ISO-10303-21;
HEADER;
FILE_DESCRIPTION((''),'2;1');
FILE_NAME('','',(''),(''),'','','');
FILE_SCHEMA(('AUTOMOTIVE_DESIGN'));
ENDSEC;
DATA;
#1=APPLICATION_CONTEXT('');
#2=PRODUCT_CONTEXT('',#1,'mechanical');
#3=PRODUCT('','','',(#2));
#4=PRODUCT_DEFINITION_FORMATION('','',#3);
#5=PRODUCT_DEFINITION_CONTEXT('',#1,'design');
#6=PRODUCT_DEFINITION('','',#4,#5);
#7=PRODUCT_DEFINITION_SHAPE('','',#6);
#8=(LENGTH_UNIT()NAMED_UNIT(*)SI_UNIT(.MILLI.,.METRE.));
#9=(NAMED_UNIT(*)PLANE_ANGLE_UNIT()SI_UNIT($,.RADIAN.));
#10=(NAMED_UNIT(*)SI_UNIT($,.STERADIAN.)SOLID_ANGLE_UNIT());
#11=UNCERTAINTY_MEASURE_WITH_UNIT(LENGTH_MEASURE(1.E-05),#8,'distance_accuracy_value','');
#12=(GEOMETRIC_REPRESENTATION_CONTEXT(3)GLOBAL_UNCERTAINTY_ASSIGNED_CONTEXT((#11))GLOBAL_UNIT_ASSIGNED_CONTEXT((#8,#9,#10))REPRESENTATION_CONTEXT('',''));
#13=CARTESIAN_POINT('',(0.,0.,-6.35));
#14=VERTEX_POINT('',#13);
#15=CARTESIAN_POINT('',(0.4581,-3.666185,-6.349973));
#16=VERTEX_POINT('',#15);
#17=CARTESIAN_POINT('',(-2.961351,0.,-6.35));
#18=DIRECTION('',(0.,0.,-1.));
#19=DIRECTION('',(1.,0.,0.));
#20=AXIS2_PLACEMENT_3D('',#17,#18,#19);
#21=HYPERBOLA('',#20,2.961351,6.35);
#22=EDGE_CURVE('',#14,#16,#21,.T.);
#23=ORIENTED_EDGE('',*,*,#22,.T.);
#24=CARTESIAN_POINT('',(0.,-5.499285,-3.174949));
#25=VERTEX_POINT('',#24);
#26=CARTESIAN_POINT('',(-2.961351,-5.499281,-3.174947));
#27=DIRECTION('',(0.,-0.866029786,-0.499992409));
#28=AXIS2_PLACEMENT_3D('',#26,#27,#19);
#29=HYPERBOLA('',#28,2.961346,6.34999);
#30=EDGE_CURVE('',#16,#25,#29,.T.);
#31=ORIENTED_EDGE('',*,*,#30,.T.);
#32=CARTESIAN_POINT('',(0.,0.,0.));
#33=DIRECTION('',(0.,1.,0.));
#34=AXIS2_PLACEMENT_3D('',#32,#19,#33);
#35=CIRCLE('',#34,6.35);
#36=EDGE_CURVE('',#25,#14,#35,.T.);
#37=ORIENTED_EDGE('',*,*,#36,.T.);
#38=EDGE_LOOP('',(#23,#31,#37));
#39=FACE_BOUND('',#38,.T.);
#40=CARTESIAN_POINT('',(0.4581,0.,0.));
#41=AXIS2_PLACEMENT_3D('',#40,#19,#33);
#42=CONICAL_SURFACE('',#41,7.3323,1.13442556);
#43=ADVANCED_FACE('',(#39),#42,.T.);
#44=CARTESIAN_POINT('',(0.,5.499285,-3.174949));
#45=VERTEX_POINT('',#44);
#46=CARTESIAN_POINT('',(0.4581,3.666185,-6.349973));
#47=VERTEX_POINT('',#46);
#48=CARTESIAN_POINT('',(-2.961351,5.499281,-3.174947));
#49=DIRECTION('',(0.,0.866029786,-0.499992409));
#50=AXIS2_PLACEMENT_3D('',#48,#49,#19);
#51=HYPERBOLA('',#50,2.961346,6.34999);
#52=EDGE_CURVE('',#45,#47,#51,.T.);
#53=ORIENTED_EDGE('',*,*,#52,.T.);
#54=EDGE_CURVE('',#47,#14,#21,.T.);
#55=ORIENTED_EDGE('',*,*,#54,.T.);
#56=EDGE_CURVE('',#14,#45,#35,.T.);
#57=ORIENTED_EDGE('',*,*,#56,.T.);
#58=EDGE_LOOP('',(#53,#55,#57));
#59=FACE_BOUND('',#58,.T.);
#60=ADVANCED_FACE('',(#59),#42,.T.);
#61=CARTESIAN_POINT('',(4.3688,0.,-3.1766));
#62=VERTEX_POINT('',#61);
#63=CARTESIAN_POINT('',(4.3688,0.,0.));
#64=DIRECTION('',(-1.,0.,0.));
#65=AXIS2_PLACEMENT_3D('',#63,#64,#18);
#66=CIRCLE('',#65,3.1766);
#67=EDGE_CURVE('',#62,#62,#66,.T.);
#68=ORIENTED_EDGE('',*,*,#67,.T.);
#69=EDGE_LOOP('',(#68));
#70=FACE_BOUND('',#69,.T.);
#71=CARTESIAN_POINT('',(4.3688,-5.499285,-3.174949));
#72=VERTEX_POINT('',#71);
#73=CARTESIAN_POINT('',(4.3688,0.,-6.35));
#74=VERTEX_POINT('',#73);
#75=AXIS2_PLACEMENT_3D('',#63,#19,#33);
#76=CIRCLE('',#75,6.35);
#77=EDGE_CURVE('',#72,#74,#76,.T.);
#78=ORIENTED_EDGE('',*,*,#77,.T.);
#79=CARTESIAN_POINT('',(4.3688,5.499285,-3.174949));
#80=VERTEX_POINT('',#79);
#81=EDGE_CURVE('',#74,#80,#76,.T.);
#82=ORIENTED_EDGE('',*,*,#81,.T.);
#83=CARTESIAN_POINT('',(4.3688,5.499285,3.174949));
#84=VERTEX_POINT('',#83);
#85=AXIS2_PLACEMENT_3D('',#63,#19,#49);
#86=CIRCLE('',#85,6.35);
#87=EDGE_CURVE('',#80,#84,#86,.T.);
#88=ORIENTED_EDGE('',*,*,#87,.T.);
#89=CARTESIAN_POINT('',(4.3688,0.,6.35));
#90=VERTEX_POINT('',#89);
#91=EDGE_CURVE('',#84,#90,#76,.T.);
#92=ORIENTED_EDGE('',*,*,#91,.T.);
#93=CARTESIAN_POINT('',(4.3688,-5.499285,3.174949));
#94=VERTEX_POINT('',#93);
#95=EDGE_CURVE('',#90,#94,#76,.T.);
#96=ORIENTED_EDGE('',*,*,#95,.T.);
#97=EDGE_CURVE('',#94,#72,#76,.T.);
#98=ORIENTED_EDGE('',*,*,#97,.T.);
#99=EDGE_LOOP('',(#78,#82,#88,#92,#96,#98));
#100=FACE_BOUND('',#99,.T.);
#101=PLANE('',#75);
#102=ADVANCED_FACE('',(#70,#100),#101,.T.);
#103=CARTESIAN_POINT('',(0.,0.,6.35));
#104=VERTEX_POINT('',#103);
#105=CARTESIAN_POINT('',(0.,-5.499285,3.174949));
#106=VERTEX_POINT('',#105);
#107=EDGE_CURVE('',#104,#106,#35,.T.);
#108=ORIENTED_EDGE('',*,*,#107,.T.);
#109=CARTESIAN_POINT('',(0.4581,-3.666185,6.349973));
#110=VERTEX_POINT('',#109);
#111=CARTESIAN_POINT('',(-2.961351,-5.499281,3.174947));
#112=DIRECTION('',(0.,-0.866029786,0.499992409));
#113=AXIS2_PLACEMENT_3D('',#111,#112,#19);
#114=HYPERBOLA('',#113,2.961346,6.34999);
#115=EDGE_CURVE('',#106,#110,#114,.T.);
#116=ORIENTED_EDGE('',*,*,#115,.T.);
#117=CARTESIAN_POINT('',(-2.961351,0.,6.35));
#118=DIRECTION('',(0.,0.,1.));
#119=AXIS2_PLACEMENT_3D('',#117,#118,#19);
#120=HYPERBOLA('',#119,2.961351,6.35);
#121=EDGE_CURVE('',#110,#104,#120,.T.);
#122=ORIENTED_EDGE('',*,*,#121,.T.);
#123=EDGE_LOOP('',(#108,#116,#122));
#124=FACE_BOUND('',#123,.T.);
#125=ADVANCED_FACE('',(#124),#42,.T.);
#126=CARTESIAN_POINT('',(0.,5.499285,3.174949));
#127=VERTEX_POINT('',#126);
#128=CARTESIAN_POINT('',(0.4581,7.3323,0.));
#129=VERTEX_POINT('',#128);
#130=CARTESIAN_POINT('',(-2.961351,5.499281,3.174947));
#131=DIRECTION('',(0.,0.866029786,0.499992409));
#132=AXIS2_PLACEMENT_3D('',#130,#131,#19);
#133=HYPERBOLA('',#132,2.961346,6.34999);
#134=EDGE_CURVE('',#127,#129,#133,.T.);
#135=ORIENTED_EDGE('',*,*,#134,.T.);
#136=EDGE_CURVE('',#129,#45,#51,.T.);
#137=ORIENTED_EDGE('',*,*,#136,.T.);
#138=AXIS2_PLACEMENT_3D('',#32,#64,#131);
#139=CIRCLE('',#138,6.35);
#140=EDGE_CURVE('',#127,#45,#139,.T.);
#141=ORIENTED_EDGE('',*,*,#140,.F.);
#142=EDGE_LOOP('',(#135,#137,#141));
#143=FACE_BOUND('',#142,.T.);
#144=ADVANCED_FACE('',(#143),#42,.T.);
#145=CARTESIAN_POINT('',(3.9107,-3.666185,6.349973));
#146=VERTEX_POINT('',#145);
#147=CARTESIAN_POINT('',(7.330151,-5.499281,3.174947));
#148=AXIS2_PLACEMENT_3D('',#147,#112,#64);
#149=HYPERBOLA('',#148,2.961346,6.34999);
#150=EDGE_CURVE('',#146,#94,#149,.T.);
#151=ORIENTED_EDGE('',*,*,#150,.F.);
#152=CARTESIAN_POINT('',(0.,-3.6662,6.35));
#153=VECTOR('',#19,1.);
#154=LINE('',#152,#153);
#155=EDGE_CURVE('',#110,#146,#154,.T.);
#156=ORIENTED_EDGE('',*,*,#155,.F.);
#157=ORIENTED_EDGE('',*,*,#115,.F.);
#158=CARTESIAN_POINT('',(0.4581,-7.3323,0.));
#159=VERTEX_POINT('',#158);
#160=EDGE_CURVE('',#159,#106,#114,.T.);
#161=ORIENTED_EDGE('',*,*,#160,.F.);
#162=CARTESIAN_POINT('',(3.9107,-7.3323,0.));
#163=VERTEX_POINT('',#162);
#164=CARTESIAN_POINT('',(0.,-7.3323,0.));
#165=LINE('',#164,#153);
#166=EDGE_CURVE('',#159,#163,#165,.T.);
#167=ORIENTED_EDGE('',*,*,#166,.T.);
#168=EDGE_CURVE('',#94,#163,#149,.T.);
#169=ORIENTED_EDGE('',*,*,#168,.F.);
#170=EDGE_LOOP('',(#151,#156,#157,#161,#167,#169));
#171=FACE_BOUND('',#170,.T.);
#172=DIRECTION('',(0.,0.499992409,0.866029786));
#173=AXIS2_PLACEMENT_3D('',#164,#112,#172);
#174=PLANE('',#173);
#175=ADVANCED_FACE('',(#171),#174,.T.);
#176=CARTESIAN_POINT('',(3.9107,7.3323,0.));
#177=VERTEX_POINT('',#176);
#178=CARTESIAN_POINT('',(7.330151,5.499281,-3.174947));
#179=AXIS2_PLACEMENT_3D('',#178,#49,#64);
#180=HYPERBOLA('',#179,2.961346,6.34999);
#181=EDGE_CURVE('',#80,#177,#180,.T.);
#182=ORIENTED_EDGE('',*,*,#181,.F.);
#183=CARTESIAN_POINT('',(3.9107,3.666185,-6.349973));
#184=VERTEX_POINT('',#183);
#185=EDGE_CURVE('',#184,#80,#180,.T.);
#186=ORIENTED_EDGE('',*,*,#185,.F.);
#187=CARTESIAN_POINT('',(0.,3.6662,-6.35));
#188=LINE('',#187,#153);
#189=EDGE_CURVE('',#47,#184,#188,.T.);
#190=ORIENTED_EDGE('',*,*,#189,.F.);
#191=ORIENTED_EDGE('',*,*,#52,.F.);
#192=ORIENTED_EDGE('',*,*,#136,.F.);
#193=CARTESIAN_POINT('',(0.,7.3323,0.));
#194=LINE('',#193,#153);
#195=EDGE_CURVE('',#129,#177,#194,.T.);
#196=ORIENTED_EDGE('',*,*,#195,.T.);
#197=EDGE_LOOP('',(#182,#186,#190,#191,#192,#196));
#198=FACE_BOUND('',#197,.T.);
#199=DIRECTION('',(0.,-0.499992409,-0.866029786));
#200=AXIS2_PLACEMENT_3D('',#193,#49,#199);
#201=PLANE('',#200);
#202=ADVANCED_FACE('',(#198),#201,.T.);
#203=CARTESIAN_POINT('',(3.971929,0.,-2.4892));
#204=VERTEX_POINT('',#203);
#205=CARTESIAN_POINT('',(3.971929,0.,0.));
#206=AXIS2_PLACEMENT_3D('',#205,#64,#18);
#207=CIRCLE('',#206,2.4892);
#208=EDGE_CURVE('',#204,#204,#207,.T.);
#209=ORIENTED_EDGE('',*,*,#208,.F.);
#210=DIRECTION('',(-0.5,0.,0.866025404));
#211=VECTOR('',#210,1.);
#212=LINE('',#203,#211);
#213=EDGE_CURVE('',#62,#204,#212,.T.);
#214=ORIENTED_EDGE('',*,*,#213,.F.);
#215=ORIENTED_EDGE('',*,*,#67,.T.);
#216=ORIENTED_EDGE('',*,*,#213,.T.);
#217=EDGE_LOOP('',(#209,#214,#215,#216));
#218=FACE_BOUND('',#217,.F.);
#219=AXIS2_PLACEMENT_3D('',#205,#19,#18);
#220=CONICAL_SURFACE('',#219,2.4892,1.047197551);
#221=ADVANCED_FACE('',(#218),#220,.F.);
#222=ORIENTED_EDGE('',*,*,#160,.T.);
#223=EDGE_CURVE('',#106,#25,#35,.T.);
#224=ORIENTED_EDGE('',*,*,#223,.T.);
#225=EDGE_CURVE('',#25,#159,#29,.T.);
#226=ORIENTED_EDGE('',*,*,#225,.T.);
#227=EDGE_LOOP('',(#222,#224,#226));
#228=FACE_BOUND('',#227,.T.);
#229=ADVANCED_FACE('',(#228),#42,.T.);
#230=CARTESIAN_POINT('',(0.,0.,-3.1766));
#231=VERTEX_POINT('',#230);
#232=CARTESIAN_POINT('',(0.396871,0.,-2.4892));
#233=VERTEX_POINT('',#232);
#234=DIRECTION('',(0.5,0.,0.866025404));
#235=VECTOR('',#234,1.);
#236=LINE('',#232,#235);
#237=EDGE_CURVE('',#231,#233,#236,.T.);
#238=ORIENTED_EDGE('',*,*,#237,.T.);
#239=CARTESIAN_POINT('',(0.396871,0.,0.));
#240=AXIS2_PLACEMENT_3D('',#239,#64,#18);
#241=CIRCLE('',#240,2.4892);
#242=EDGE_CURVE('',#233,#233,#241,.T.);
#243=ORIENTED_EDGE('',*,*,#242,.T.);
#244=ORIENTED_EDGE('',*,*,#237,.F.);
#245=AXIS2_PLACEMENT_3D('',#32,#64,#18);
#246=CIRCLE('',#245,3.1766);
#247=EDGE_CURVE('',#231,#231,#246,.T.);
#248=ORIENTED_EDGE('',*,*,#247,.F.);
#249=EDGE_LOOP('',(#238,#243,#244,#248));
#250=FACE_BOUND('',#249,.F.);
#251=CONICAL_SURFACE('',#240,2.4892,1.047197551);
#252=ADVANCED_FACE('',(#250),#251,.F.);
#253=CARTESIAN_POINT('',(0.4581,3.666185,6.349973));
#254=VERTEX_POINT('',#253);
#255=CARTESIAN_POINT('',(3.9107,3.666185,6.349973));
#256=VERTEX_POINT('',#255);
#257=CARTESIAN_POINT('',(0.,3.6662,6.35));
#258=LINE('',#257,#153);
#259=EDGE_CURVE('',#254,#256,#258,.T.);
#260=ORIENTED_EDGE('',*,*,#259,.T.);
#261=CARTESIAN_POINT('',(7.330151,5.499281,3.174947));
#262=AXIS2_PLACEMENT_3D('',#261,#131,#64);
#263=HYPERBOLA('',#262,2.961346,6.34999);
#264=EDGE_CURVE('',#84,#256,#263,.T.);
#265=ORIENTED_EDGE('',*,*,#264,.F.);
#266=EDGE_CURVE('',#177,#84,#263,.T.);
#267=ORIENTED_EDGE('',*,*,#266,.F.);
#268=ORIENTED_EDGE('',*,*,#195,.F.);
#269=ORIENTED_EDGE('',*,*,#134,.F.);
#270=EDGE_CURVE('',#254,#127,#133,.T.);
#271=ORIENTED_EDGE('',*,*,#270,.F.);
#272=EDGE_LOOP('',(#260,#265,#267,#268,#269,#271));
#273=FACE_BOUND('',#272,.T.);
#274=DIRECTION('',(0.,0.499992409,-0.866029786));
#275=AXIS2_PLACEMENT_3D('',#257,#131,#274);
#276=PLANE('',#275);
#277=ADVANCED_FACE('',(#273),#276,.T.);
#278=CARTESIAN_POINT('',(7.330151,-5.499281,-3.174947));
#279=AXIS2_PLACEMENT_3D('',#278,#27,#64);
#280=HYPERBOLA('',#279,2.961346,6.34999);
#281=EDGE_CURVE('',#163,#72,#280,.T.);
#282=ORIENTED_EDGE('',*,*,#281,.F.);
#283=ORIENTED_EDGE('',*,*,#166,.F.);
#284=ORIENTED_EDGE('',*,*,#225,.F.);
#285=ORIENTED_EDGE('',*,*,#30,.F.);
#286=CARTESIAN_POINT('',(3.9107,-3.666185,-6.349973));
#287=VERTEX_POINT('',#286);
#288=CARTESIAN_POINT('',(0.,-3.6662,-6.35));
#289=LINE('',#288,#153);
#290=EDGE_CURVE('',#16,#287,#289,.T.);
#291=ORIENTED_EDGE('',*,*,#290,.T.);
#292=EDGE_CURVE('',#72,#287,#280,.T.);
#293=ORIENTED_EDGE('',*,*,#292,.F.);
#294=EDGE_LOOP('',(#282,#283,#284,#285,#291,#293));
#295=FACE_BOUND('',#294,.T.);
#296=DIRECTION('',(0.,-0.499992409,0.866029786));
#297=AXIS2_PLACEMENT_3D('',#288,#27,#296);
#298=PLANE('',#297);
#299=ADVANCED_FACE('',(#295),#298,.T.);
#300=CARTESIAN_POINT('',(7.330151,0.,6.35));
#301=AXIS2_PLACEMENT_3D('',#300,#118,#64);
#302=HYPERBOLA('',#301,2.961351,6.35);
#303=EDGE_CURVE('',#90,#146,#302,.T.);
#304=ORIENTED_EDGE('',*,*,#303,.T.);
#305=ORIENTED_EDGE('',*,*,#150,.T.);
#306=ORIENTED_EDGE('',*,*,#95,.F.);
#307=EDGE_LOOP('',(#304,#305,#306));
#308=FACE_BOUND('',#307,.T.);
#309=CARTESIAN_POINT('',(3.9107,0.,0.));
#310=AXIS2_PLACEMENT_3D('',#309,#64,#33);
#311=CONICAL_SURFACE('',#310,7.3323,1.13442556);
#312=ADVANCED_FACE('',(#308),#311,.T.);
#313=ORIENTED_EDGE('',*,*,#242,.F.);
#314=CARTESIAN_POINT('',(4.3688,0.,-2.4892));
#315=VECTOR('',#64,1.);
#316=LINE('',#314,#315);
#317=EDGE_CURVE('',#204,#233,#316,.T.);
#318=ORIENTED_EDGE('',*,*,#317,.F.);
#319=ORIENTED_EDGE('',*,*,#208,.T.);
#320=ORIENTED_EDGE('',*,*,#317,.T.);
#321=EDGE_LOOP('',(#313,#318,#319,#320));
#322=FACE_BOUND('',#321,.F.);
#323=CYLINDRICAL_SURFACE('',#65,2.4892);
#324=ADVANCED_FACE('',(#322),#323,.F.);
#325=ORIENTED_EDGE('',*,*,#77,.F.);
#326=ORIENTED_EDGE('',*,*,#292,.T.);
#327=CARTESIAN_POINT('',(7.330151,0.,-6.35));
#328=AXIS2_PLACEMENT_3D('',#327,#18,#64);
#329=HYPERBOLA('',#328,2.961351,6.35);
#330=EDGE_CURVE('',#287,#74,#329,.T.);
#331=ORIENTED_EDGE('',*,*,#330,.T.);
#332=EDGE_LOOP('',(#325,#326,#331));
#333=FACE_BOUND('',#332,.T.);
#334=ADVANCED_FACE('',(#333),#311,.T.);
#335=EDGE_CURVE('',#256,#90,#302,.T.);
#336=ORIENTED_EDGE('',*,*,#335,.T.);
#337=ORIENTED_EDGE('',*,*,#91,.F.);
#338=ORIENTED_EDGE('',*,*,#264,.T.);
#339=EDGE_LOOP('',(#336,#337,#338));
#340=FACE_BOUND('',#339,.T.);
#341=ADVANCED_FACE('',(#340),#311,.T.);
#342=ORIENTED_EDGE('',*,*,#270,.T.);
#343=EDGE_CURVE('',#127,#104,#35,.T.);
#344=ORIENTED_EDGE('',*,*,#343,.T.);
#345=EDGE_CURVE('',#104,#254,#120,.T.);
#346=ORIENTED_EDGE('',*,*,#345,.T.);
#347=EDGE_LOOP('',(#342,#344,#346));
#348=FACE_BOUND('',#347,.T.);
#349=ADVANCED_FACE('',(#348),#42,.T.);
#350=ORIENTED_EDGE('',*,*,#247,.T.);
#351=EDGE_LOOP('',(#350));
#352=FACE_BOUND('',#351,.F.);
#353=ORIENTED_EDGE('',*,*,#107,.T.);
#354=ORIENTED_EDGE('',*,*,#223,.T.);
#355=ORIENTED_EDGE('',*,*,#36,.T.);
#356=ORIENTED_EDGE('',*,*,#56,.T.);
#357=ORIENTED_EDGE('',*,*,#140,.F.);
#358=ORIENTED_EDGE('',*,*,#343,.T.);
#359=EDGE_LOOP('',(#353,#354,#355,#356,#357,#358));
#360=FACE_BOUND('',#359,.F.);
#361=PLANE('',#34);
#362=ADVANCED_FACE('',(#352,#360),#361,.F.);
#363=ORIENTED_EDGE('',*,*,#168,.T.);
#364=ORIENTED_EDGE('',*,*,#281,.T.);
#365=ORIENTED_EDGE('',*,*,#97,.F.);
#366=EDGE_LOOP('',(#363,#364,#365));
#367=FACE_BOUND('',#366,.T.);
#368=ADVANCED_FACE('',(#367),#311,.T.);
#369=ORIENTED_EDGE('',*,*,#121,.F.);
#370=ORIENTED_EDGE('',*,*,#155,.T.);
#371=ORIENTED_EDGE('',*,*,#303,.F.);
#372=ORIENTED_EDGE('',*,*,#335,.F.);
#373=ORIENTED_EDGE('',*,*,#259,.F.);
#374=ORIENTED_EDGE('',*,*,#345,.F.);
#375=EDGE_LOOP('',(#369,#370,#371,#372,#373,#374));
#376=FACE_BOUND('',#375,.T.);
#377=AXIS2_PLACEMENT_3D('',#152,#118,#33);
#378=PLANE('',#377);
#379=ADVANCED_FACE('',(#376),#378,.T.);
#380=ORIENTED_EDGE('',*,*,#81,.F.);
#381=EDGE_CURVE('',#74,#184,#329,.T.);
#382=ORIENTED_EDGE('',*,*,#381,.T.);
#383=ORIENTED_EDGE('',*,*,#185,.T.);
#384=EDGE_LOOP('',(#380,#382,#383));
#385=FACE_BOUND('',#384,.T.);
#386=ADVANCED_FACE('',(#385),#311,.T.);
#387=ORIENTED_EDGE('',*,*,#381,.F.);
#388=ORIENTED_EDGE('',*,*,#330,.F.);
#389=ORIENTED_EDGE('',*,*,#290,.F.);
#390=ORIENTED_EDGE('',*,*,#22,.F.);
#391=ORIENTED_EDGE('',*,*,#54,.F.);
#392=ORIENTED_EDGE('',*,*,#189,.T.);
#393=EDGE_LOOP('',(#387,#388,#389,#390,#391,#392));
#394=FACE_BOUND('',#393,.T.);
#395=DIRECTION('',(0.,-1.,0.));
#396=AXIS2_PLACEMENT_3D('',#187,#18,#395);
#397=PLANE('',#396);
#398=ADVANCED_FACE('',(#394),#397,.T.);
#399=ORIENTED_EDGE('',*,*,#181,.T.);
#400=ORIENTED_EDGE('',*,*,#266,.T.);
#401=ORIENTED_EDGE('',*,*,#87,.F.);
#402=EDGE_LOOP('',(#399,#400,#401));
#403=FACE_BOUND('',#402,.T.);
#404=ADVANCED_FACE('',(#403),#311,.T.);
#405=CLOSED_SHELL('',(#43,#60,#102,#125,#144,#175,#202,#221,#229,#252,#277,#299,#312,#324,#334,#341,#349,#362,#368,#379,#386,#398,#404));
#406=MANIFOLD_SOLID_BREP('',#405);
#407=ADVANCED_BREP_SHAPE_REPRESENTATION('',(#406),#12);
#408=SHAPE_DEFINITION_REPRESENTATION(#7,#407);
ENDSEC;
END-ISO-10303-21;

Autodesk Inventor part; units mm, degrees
ref_plane "YZ Plane" through (0, 0, 0) normal (1, 0, 0) x (0, 1, 0)
ref_plane "XZ Plane" through (0, 0, 0) normal (0, 1, 0) x (-1, 0, 0)
sketch "Sketch1" plane through (0, 0, 0) normal (1, 0, 0) x (0, 1, 0)
  line L0 (-7.3323, 0) -> (-3.6662, 6.35)
  line L1 (-3.6662, 6.35) -> (3.6662, 6.35)
  line L2 (3.6662, 6.35) -> (7.3323, 0)
  line L3 (7.3323, 0) -> (3.6662, -6.35)
  line L4 (3.6662, -6.35) -> (-3.6662, -6.35)
  line L5 (-3.6662, -6.35) -> (-7.3323, 0)
  point P0 (0, 0)
  point P1 (0, 0)
  dimension "d0" = 14.6647
extrude "Body" add sketch "Sketch1" along normal blind 4.3688
sketch "Sketch2" plane through (0, 0, 0) normal (0, 0, 1) x (1, 0, 0)
  line L0 (0, 3.6662) -> (0, 7.3323) projected
  line L1 (0, 7.3323) -> (4.3688, 7.3323) projected
  line L2 (4.3688, 3.6662) -> (4.3688, 7.3323) projected
  line L3 (-0.8738, 0) -> (5.2426, 0) projected
  line L4 (0.4581, 7.3323) -> (0, 6.35)
  line L5 (3.9107, 7.3323) -> (4.3688, 6.35)
  dimension "d3" = 25
  dimension "d4" = 25
  dimension "d5" = 12.7
  dimension "d6" = 12.7
revolve "Chamfer1" cut sketch "Sketch2" angle 360 about axis through (-10, 0, 0) along (1, 0, 0)
sketch "Sketch3" plane through (4.3688, 0, 0) normal (1, 0, 0) x (0, 0, -1)
  arc A0 (-3.175, -5.4993) -> (3.175, -5.4993) centre (0, 0) ccw projected
hole "Thread" at (4.3688, 0, 0) direction (-1, 0, 0) diameter 4.9784 end through all thread size "1/4-20 UNC" class "2B" standard "ANSI Unified Screw Threads"
chamfer "Chamfer2" distance 0.6874 angle 30 1 edges at (4.3688, 0, 2.4892) measured on face at (4.3688, 5.0338, 0.1)
chamfer "Chamfer3" distance 0.6874 angle 30 1 edges at (0, 0, 2.4892) measured on face at (0, 5.0338, 0.1)
ref_plane "Work Plane1" through (-15.5166, 0, 0) normal (0, -0.8660254, -0.5) x (1, 0, 0)
equation "\"d0\" = 1.1547 * SW"
equation "\"d1\" = KOH"
equation "\"d3\" = ANG1"
equation "\"d4\" = ANG2"
equation "\"d5\" = SW0"
equation "\"d6\" = SW01"
equation "\"d8\" = -0.5 * GD1 + 0.5 * NND"
equation "\"d40\" = -0.5 * GD1 + 0.5 * NND"
equation "\"d10\" = -0.5 * GD1 + 0.5 * NND"
equation "\"d41\" = -0.5 * GD1 + 0.5 * NND"
equation "\"ANG1\" = 25deg"
equation "\"ANG2\" = 25deg"
equation "\"NND\" = 6.35"
equation "\"KOH\" = 4.3688"
equation "\"SW\" = 12.7"
equation "\"SW0\" = SW"
equation "\"SW01\" = SW"
equation "\"THREADDIA\" = 6.35"
equation "\"TOA\" = 30deg"
equation "\"E0\" = 1.155 * SW"
equation "\"GD1\" = 4.975185"
properties part number "ANSI B18.2.2 - 1/4 - 20, HHJNI" material "Steel, Mild"
